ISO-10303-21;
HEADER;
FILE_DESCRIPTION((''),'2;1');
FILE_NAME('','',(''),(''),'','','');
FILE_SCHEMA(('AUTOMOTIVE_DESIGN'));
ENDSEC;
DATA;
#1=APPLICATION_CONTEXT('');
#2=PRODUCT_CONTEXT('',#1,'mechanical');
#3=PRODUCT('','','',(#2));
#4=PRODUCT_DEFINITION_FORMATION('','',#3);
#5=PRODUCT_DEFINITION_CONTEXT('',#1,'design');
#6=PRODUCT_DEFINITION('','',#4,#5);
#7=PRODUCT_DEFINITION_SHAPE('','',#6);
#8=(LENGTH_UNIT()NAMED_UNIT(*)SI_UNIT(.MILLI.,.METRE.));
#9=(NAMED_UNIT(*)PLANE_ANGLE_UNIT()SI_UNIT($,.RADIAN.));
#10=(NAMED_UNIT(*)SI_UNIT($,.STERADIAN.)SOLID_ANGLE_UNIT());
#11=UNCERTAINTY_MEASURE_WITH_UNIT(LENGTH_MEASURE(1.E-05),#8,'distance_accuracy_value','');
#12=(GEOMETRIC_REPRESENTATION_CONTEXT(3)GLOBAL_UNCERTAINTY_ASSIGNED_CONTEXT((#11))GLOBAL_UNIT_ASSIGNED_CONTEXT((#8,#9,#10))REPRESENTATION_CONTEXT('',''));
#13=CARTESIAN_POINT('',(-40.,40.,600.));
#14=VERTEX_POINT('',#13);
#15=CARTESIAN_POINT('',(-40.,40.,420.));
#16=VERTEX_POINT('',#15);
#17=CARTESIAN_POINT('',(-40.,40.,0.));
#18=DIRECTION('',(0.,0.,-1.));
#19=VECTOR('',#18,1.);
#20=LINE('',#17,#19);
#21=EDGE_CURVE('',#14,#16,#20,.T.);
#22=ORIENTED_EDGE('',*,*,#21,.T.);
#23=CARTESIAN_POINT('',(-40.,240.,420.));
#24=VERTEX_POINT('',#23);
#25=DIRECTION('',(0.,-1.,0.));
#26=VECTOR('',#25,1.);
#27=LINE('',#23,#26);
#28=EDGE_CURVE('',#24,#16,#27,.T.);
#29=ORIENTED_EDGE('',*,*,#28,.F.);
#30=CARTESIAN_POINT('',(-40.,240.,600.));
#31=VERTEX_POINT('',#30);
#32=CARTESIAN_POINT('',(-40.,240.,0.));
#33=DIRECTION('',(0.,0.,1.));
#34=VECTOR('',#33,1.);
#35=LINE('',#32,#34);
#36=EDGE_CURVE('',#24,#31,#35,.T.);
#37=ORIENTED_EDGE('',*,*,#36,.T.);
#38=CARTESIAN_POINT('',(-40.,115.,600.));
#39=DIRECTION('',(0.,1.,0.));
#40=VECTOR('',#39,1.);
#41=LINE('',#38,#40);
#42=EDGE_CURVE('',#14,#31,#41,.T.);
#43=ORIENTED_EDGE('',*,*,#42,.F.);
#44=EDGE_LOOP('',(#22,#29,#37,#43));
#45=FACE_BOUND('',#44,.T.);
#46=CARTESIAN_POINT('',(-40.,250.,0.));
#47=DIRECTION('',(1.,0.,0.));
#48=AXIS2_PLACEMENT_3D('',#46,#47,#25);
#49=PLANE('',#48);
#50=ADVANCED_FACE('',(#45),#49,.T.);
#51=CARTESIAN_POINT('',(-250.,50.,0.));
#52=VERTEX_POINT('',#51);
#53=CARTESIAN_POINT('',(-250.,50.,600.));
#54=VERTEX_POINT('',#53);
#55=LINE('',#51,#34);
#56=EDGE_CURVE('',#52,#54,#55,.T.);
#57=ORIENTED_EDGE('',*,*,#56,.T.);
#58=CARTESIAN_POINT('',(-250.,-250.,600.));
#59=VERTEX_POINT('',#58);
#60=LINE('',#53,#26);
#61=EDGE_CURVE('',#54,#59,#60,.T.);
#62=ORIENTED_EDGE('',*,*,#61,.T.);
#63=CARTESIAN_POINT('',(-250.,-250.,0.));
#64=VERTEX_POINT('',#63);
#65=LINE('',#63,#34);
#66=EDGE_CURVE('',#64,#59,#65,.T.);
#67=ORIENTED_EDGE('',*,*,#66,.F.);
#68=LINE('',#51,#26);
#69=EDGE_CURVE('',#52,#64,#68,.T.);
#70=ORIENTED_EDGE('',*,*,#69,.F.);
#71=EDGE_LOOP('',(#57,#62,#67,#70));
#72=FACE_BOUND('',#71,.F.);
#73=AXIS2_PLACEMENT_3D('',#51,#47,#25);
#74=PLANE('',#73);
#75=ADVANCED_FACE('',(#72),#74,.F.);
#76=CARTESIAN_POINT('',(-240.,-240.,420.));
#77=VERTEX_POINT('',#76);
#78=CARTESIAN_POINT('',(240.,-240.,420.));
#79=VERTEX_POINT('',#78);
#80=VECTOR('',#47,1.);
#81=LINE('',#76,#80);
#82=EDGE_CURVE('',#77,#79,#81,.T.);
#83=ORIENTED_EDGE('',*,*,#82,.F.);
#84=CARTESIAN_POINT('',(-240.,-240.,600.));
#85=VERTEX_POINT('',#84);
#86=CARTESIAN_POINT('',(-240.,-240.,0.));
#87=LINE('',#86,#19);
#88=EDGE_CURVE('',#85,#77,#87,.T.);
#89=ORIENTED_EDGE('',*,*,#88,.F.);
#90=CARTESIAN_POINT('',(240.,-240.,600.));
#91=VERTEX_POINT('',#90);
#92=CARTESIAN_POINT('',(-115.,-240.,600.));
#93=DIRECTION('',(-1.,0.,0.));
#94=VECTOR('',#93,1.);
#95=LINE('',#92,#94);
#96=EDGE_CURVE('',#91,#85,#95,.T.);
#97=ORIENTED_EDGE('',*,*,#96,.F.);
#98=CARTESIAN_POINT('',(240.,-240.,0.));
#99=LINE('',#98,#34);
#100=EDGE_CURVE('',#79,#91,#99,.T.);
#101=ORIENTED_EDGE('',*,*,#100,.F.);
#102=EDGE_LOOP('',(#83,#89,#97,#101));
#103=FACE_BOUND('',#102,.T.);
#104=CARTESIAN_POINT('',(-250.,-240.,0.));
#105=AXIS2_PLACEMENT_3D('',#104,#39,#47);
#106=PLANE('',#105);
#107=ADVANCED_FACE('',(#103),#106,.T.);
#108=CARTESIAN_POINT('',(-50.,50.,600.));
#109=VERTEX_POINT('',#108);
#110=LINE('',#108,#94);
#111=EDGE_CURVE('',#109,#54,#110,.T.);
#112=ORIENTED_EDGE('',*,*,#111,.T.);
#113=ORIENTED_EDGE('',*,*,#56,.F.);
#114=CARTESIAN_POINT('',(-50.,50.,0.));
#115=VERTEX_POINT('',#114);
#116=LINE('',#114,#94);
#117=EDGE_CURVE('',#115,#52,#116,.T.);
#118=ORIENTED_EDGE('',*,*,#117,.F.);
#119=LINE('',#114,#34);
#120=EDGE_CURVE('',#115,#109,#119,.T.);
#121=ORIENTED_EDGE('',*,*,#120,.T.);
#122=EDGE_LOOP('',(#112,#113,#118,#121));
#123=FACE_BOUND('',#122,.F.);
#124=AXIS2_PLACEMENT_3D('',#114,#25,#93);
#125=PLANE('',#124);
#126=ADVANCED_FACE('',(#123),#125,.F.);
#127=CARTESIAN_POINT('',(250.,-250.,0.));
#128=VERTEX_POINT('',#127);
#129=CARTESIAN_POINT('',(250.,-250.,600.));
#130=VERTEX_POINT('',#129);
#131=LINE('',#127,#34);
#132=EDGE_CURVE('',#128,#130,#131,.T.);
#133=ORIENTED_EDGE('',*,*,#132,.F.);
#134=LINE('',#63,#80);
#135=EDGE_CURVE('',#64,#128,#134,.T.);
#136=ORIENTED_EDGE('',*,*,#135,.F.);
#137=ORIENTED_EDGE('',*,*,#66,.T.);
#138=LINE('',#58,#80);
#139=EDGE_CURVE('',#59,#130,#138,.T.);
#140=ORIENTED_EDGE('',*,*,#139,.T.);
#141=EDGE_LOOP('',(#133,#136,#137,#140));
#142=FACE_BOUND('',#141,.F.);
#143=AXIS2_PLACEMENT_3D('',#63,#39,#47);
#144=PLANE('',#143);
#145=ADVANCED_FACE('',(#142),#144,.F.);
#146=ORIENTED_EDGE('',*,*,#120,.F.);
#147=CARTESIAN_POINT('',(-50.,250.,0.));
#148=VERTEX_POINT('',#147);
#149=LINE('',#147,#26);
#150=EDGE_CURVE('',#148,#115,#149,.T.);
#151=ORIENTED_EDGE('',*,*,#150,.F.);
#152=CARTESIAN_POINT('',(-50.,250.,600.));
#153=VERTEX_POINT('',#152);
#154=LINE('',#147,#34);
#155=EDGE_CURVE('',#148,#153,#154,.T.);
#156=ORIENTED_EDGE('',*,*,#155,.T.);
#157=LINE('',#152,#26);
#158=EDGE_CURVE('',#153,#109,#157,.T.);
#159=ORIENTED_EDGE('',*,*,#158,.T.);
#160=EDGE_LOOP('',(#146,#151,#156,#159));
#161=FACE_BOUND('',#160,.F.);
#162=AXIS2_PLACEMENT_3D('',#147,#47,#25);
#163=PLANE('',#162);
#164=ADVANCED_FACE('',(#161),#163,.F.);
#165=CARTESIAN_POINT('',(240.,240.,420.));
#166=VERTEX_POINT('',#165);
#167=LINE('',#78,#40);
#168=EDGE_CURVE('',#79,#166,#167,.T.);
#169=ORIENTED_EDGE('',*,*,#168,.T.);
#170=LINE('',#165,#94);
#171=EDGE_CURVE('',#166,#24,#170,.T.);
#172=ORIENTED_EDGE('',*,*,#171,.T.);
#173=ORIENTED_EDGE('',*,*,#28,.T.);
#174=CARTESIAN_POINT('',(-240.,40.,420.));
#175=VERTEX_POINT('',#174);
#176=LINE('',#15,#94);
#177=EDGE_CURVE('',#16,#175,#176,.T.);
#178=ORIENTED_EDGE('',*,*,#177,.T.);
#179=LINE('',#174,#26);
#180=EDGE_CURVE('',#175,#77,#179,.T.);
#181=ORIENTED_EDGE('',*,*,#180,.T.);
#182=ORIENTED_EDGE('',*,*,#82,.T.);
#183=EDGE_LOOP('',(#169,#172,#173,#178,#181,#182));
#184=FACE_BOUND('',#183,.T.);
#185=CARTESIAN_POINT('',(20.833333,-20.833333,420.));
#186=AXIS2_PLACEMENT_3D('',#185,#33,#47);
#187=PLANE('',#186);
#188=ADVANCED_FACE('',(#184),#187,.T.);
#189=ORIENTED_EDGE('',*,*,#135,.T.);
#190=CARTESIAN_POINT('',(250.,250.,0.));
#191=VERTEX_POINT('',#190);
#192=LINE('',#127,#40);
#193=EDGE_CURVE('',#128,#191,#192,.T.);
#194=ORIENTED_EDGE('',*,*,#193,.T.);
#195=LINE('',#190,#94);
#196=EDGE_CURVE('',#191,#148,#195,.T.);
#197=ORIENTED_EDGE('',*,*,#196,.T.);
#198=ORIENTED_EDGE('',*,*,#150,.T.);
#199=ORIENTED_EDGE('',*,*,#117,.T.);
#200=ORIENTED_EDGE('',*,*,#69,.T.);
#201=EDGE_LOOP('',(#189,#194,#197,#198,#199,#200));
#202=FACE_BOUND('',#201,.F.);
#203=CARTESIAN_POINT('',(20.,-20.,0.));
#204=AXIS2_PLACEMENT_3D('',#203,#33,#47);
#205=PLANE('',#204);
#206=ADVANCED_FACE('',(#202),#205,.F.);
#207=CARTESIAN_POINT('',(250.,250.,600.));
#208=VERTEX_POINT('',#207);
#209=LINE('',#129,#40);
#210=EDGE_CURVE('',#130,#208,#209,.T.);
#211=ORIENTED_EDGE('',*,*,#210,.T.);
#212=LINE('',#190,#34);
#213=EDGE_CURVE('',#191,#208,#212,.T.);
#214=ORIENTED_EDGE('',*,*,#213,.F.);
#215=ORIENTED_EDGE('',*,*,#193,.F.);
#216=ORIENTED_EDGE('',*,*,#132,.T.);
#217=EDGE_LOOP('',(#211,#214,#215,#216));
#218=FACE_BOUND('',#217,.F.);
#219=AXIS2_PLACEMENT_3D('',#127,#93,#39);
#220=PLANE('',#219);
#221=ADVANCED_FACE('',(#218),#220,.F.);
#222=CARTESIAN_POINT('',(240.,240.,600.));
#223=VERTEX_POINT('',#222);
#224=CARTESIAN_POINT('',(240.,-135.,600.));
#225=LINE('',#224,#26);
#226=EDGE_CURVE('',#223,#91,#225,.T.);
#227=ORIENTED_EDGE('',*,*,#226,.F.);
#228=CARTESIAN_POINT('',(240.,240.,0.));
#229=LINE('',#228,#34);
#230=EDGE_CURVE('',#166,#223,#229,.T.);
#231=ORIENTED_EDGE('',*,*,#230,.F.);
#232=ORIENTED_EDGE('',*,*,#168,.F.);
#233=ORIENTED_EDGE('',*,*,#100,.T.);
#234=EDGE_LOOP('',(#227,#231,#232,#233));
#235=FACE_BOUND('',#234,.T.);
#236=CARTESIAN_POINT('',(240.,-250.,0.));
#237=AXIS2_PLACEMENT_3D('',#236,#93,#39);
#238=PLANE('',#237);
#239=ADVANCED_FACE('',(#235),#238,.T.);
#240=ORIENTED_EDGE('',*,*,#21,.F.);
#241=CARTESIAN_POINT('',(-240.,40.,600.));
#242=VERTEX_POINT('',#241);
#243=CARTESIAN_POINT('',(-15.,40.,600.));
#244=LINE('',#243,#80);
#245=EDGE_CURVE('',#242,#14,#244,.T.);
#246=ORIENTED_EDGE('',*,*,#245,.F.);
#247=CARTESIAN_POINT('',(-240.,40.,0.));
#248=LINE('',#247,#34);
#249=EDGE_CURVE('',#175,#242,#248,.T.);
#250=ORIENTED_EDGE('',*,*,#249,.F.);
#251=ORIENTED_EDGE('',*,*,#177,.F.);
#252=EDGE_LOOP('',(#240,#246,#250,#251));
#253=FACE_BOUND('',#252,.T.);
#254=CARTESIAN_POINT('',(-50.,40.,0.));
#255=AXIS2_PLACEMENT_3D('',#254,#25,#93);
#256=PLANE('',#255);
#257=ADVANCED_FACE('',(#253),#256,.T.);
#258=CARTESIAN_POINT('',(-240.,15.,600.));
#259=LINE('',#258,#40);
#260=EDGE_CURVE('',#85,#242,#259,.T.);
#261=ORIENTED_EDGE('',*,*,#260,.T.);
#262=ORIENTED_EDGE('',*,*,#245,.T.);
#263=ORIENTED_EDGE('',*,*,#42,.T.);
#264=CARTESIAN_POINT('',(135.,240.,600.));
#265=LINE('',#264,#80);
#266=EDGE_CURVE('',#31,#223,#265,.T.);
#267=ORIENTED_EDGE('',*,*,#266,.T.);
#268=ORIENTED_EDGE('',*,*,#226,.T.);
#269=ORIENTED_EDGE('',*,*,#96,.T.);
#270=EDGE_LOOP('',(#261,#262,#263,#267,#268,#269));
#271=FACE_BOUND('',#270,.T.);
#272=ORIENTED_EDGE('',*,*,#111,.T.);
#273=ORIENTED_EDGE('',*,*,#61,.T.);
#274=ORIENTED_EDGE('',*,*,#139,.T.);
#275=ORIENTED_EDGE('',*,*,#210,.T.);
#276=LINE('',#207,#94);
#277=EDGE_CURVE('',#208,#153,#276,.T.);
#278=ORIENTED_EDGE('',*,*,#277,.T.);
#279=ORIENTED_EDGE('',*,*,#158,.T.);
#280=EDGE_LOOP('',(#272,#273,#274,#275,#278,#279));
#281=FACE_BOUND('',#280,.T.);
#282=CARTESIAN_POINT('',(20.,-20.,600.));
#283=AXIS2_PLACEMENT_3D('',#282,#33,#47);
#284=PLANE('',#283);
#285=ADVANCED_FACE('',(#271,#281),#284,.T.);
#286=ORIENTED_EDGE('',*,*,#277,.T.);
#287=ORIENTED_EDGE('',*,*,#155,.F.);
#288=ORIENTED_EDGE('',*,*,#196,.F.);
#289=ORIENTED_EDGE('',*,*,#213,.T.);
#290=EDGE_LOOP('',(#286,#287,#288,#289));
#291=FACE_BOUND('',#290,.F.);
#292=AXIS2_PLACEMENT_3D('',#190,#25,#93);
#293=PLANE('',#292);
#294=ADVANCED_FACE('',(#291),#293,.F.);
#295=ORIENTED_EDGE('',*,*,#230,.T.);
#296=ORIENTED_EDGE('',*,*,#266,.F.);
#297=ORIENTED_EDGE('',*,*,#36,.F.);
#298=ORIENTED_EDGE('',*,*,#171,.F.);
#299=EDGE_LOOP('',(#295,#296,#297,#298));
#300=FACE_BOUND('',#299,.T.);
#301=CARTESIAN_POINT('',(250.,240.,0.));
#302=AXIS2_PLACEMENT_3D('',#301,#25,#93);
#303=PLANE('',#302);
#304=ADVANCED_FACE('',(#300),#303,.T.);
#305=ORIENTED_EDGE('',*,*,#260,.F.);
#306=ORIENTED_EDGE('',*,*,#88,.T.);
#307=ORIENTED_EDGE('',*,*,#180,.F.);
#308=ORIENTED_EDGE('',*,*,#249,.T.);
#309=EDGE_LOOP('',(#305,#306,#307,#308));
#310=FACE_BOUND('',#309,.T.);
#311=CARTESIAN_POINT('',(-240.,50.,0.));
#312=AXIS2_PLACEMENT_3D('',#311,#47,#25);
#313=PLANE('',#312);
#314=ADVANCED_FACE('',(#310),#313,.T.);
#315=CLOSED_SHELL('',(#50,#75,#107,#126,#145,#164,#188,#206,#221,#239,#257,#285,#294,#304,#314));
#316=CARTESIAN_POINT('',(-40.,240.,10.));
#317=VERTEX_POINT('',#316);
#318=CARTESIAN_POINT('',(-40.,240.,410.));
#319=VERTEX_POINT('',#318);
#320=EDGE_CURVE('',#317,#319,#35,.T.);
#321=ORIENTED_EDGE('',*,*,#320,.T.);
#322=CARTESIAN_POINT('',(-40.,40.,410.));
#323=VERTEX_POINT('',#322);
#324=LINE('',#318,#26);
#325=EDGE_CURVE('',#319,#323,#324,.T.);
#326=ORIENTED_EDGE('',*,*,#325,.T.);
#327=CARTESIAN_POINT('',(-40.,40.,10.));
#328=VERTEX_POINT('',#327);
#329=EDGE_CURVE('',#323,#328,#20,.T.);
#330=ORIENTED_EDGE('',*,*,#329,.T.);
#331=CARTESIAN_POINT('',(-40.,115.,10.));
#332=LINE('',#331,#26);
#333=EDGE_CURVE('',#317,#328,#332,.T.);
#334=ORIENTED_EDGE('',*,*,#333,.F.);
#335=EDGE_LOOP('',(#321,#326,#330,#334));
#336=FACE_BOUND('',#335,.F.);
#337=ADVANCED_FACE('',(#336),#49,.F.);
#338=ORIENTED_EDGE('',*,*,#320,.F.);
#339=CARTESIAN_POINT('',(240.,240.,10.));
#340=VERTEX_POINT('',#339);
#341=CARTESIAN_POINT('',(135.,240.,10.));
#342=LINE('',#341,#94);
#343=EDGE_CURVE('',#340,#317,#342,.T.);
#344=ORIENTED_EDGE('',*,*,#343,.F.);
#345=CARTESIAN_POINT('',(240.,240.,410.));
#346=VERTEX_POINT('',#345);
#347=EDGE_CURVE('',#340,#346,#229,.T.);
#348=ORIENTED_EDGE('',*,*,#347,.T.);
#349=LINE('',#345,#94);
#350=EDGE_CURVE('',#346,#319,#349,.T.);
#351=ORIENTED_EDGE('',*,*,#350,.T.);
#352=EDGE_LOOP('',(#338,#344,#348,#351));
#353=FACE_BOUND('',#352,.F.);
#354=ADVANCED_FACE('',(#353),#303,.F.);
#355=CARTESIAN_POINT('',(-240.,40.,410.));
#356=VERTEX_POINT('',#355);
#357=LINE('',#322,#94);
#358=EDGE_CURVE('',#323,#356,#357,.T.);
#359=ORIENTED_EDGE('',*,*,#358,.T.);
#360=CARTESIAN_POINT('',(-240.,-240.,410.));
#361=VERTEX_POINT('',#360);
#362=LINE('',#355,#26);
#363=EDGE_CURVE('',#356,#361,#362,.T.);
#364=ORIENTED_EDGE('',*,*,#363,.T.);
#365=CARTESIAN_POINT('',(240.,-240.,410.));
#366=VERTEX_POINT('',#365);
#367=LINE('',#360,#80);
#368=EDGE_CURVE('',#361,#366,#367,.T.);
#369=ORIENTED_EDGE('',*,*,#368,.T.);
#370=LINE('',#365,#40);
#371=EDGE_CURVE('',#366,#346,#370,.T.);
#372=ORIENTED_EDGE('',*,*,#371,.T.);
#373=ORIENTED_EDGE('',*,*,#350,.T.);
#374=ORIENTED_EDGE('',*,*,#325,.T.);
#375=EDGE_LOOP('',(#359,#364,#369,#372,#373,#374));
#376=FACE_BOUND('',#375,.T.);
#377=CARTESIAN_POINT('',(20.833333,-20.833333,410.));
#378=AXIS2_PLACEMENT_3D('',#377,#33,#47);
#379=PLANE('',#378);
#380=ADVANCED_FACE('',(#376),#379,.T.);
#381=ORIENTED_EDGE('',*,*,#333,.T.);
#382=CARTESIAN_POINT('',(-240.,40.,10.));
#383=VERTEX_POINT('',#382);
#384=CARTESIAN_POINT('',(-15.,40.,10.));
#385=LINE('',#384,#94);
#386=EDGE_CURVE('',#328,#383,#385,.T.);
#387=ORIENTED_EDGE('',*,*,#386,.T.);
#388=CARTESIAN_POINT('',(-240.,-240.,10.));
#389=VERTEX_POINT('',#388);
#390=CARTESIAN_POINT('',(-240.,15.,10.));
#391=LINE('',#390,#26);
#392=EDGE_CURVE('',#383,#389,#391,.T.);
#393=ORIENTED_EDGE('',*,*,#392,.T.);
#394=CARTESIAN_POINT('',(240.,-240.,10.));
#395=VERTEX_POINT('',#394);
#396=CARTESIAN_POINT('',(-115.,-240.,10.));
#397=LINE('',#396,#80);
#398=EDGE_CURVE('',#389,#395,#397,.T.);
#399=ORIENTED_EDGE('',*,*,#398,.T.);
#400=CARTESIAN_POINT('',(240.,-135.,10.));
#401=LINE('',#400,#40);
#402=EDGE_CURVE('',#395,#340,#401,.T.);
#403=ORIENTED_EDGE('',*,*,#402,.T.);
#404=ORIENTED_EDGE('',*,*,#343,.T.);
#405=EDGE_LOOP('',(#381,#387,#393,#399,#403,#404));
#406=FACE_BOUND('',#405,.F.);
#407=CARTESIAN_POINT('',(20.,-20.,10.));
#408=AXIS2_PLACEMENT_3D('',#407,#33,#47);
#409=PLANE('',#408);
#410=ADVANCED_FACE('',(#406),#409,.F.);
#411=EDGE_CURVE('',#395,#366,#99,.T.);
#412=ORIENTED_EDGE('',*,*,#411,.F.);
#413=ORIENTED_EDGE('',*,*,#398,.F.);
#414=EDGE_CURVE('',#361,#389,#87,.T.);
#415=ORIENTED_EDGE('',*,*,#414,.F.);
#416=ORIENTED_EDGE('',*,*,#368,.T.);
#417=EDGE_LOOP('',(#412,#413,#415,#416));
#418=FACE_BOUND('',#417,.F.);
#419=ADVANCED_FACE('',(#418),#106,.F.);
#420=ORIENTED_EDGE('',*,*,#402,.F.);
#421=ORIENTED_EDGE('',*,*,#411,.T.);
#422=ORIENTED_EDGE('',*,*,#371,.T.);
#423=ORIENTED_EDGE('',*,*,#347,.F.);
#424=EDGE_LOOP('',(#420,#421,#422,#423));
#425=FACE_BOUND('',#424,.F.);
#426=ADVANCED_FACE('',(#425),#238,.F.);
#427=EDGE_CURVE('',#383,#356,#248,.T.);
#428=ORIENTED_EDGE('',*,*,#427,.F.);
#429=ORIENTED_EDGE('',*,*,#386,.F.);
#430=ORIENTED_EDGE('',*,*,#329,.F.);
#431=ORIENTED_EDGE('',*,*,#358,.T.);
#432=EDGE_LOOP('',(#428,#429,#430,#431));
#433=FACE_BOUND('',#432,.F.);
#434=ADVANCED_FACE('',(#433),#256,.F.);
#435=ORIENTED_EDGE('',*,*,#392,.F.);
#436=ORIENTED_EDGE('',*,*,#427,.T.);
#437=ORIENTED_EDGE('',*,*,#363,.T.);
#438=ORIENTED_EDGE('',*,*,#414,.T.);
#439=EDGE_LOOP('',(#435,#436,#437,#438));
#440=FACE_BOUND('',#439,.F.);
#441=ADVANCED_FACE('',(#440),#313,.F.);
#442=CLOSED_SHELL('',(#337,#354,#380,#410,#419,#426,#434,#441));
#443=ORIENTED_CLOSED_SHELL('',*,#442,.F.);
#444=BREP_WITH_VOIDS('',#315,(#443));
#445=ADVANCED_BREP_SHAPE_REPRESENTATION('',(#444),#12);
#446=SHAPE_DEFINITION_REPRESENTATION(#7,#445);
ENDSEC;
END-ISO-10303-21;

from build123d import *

# Parameters (mm, degrees)
F1_DEPTH = 600
F2_T     = -10
F5_DEPTH = 10


# Not quite as in the source:
# - a feature names something its author has since deleted; it is built from what else it names


with BuildPart() as f1:
    # F0 (on Top) → F1 (new body)
    with BuildSketch(Plane.XY):
        Polygon((-250, -250), (250, -250), (250, 250), (-50, 250), (-50, 50), (-250, 50), align=None)
    extrude(amount=F1_DEPTH)

    # F2
    f2_openings = [f1.faces().sort_by_distance(p)[0] for p in [
        (28.571429, -28.571429, 600),
    ]]
    offset(amount=F2_T, openings=f2_openings, kind=Kind.INTERSECTION)

    # F4 (on offset) → F5 (join)
    with BuildSketch(Plane.XY.offset(410)):
        Polygon((-240, 40), (-240, -240), (240, -240), (240, 240), (-40, 240), (-40, 40), align=None)
    extrude(amount=F5_DEPTH)


solid = f1.part
